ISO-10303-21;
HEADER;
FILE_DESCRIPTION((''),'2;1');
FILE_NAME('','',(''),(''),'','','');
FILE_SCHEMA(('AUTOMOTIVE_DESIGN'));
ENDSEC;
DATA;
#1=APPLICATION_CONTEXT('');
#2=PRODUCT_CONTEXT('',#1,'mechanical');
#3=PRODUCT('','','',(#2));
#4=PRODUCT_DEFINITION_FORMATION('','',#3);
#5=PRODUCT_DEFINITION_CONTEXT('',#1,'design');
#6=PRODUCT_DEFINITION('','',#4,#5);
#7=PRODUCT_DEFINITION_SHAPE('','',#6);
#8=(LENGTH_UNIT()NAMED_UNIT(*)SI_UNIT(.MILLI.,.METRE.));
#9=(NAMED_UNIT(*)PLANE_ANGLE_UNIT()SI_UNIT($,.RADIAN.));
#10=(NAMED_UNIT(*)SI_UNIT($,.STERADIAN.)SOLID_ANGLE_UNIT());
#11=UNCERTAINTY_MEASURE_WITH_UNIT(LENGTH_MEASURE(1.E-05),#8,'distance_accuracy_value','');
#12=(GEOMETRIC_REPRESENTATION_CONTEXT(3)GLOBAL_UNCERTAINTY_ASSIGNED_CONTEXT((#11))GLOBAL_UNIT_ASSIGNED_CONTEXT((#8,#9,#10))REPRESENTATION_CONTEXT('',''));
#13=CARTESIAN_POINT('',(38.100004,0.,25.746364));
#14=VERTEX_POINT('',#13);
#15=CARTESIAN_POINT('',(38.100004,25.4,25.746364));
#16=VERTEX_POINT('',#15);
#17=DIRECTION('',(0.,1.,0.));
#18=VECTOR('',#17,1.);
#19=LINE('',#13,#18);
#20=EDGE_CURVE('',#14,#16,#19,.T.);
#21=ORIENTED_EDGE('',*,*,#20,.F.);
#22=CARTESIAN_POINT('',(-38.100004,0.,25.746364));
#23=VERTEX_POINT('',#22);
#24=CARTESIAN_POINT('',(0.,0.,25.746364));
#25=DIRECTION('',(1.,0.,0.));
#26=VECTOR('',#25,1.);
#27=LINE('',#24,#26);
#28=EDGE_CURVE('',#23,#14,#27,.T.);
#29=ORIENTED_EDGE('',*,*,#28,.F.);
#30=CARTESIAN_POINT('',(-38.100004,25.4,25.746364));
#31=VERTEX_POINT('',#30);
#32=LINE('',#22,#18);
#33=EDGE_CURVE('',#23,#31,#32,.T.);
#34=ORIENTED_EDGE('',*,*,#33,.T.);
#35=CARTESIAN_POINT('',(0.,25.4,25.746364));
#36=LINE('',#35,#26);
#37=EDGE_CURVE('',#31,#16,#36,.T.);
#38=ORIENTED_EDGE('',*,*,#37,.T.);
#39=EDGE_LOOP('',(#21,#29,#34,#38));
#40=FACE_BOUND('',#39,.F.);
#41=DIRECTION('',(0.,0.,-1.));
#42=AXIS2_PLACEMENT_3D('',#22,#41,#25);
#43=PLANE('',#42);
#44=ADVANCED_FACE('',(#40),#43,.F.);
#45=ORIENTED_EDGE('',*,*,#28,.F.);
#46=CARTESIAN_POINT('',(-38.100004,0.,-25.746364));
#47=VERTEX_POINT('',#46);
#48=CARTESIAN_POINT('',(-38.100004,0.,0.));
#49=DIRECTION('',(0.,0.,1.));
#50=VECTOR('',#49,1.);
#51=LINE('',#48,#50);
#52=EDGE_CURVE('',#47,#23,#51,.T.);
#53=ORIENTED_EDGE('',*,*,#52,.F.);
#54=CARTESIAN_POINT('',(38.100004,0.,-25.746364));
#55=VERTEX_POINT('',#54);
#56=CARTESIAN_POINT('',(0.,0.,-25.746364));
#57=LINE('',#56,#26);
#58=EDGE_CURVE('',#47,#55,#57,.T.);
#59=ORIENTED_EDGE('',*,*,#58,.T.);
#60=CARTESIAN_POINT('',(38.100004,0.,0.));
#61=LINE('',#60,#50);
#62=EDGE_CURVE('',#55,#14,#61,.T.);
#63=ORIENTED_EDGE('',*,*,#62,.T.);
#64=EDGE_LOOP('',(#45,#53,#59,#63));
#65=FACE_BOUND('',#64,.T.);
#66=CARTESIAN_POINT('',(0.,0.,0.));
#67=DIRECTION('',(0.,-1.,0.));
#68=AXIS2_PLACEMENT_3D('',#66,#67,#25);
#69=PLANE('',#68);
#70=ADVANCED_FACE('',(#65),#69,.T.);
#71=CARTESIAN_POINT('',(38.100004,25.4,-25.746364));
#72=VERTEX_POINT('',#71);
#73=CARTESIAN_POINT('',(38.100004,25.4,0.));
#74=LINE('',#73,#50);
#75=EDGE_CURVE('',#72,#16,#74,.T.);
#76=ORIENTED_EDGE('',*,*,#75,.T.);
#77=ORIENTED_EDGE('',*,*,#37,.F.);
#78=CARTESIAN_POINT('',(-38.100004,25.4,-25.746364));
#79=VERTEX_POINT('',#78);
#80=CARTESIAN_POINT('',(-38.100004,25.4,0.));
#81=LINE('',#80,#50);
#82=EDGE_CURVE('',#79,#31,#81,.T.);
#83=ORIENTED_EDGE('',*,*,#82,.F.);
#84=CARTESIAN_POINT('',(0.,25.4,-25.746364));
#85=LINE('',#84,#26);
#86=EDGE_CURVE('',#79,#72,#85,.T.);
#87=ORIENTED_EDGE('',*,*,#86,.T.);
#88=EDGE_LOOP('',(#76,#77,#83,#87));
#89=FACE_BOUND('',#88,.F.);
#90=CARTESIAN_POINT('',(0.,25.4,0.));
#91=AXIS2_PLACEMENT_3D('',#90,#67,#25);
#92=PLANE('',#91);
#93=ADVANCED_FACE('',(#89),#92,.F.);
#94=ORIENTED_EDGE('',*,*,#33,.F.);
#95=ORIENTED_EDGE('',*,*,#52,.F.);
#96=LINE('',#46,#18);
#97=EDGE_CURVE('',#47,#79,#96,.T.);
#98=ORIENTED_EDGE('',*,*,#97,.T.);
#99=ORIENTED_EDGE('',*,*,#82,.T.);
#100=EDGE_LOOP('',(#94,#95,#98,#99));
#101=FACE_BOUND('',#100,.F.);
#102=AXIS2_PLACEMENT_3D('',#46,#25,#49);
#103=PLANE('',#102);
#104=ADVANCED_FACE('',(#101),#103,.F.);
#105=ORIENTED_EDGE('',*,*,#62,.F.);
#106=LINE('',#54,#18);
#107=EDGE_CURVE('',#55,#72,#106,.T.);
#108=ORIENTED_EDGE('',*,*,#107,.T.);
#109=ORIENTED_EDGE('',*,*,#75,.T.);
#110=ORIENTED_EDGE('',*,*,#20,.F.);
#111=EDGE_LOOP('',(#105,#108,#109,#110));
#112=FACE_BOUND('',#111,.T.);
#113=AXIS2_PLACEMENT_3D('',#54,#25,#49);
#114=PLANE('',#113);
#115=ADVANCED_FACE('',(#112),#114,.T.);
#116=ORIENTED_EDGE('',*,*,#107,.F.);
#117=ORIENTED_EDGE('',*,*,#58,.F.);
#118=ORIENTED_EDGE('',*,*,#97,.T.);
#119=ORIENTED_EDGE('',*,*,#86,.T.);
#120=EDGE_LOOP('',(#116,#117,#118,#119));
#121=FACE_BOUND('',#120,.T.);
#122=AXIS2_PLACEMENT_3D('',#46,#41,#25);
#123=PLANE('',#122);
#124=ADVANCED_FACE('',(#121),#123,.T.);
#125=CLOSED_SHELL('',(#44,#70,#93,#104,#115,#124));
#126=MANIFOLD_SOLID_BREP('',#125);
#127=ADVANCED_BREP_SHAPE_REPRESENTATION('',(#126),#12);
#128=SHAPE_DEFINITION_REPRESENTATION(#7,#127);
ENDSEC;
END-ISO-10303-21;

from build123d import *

# Parameters (mm, degrees)
F0_W     = 76.2000083923
F0_H     = 51.4927282929
F3_DEPTH = 25.4


# Not quite as in the source:
# - the program builds the solid bodies; features that only make, move or delete a surface that nothing else refers to are left out


with BuildPart() as f3:
    # F0 (on Front) → F3 (new body)
    with BuildSketch(Plane.XZ):
        Rectangle(F0_W, F0_H)
    extrude(amount=-F3_DEPTH)


solid = f3.part
